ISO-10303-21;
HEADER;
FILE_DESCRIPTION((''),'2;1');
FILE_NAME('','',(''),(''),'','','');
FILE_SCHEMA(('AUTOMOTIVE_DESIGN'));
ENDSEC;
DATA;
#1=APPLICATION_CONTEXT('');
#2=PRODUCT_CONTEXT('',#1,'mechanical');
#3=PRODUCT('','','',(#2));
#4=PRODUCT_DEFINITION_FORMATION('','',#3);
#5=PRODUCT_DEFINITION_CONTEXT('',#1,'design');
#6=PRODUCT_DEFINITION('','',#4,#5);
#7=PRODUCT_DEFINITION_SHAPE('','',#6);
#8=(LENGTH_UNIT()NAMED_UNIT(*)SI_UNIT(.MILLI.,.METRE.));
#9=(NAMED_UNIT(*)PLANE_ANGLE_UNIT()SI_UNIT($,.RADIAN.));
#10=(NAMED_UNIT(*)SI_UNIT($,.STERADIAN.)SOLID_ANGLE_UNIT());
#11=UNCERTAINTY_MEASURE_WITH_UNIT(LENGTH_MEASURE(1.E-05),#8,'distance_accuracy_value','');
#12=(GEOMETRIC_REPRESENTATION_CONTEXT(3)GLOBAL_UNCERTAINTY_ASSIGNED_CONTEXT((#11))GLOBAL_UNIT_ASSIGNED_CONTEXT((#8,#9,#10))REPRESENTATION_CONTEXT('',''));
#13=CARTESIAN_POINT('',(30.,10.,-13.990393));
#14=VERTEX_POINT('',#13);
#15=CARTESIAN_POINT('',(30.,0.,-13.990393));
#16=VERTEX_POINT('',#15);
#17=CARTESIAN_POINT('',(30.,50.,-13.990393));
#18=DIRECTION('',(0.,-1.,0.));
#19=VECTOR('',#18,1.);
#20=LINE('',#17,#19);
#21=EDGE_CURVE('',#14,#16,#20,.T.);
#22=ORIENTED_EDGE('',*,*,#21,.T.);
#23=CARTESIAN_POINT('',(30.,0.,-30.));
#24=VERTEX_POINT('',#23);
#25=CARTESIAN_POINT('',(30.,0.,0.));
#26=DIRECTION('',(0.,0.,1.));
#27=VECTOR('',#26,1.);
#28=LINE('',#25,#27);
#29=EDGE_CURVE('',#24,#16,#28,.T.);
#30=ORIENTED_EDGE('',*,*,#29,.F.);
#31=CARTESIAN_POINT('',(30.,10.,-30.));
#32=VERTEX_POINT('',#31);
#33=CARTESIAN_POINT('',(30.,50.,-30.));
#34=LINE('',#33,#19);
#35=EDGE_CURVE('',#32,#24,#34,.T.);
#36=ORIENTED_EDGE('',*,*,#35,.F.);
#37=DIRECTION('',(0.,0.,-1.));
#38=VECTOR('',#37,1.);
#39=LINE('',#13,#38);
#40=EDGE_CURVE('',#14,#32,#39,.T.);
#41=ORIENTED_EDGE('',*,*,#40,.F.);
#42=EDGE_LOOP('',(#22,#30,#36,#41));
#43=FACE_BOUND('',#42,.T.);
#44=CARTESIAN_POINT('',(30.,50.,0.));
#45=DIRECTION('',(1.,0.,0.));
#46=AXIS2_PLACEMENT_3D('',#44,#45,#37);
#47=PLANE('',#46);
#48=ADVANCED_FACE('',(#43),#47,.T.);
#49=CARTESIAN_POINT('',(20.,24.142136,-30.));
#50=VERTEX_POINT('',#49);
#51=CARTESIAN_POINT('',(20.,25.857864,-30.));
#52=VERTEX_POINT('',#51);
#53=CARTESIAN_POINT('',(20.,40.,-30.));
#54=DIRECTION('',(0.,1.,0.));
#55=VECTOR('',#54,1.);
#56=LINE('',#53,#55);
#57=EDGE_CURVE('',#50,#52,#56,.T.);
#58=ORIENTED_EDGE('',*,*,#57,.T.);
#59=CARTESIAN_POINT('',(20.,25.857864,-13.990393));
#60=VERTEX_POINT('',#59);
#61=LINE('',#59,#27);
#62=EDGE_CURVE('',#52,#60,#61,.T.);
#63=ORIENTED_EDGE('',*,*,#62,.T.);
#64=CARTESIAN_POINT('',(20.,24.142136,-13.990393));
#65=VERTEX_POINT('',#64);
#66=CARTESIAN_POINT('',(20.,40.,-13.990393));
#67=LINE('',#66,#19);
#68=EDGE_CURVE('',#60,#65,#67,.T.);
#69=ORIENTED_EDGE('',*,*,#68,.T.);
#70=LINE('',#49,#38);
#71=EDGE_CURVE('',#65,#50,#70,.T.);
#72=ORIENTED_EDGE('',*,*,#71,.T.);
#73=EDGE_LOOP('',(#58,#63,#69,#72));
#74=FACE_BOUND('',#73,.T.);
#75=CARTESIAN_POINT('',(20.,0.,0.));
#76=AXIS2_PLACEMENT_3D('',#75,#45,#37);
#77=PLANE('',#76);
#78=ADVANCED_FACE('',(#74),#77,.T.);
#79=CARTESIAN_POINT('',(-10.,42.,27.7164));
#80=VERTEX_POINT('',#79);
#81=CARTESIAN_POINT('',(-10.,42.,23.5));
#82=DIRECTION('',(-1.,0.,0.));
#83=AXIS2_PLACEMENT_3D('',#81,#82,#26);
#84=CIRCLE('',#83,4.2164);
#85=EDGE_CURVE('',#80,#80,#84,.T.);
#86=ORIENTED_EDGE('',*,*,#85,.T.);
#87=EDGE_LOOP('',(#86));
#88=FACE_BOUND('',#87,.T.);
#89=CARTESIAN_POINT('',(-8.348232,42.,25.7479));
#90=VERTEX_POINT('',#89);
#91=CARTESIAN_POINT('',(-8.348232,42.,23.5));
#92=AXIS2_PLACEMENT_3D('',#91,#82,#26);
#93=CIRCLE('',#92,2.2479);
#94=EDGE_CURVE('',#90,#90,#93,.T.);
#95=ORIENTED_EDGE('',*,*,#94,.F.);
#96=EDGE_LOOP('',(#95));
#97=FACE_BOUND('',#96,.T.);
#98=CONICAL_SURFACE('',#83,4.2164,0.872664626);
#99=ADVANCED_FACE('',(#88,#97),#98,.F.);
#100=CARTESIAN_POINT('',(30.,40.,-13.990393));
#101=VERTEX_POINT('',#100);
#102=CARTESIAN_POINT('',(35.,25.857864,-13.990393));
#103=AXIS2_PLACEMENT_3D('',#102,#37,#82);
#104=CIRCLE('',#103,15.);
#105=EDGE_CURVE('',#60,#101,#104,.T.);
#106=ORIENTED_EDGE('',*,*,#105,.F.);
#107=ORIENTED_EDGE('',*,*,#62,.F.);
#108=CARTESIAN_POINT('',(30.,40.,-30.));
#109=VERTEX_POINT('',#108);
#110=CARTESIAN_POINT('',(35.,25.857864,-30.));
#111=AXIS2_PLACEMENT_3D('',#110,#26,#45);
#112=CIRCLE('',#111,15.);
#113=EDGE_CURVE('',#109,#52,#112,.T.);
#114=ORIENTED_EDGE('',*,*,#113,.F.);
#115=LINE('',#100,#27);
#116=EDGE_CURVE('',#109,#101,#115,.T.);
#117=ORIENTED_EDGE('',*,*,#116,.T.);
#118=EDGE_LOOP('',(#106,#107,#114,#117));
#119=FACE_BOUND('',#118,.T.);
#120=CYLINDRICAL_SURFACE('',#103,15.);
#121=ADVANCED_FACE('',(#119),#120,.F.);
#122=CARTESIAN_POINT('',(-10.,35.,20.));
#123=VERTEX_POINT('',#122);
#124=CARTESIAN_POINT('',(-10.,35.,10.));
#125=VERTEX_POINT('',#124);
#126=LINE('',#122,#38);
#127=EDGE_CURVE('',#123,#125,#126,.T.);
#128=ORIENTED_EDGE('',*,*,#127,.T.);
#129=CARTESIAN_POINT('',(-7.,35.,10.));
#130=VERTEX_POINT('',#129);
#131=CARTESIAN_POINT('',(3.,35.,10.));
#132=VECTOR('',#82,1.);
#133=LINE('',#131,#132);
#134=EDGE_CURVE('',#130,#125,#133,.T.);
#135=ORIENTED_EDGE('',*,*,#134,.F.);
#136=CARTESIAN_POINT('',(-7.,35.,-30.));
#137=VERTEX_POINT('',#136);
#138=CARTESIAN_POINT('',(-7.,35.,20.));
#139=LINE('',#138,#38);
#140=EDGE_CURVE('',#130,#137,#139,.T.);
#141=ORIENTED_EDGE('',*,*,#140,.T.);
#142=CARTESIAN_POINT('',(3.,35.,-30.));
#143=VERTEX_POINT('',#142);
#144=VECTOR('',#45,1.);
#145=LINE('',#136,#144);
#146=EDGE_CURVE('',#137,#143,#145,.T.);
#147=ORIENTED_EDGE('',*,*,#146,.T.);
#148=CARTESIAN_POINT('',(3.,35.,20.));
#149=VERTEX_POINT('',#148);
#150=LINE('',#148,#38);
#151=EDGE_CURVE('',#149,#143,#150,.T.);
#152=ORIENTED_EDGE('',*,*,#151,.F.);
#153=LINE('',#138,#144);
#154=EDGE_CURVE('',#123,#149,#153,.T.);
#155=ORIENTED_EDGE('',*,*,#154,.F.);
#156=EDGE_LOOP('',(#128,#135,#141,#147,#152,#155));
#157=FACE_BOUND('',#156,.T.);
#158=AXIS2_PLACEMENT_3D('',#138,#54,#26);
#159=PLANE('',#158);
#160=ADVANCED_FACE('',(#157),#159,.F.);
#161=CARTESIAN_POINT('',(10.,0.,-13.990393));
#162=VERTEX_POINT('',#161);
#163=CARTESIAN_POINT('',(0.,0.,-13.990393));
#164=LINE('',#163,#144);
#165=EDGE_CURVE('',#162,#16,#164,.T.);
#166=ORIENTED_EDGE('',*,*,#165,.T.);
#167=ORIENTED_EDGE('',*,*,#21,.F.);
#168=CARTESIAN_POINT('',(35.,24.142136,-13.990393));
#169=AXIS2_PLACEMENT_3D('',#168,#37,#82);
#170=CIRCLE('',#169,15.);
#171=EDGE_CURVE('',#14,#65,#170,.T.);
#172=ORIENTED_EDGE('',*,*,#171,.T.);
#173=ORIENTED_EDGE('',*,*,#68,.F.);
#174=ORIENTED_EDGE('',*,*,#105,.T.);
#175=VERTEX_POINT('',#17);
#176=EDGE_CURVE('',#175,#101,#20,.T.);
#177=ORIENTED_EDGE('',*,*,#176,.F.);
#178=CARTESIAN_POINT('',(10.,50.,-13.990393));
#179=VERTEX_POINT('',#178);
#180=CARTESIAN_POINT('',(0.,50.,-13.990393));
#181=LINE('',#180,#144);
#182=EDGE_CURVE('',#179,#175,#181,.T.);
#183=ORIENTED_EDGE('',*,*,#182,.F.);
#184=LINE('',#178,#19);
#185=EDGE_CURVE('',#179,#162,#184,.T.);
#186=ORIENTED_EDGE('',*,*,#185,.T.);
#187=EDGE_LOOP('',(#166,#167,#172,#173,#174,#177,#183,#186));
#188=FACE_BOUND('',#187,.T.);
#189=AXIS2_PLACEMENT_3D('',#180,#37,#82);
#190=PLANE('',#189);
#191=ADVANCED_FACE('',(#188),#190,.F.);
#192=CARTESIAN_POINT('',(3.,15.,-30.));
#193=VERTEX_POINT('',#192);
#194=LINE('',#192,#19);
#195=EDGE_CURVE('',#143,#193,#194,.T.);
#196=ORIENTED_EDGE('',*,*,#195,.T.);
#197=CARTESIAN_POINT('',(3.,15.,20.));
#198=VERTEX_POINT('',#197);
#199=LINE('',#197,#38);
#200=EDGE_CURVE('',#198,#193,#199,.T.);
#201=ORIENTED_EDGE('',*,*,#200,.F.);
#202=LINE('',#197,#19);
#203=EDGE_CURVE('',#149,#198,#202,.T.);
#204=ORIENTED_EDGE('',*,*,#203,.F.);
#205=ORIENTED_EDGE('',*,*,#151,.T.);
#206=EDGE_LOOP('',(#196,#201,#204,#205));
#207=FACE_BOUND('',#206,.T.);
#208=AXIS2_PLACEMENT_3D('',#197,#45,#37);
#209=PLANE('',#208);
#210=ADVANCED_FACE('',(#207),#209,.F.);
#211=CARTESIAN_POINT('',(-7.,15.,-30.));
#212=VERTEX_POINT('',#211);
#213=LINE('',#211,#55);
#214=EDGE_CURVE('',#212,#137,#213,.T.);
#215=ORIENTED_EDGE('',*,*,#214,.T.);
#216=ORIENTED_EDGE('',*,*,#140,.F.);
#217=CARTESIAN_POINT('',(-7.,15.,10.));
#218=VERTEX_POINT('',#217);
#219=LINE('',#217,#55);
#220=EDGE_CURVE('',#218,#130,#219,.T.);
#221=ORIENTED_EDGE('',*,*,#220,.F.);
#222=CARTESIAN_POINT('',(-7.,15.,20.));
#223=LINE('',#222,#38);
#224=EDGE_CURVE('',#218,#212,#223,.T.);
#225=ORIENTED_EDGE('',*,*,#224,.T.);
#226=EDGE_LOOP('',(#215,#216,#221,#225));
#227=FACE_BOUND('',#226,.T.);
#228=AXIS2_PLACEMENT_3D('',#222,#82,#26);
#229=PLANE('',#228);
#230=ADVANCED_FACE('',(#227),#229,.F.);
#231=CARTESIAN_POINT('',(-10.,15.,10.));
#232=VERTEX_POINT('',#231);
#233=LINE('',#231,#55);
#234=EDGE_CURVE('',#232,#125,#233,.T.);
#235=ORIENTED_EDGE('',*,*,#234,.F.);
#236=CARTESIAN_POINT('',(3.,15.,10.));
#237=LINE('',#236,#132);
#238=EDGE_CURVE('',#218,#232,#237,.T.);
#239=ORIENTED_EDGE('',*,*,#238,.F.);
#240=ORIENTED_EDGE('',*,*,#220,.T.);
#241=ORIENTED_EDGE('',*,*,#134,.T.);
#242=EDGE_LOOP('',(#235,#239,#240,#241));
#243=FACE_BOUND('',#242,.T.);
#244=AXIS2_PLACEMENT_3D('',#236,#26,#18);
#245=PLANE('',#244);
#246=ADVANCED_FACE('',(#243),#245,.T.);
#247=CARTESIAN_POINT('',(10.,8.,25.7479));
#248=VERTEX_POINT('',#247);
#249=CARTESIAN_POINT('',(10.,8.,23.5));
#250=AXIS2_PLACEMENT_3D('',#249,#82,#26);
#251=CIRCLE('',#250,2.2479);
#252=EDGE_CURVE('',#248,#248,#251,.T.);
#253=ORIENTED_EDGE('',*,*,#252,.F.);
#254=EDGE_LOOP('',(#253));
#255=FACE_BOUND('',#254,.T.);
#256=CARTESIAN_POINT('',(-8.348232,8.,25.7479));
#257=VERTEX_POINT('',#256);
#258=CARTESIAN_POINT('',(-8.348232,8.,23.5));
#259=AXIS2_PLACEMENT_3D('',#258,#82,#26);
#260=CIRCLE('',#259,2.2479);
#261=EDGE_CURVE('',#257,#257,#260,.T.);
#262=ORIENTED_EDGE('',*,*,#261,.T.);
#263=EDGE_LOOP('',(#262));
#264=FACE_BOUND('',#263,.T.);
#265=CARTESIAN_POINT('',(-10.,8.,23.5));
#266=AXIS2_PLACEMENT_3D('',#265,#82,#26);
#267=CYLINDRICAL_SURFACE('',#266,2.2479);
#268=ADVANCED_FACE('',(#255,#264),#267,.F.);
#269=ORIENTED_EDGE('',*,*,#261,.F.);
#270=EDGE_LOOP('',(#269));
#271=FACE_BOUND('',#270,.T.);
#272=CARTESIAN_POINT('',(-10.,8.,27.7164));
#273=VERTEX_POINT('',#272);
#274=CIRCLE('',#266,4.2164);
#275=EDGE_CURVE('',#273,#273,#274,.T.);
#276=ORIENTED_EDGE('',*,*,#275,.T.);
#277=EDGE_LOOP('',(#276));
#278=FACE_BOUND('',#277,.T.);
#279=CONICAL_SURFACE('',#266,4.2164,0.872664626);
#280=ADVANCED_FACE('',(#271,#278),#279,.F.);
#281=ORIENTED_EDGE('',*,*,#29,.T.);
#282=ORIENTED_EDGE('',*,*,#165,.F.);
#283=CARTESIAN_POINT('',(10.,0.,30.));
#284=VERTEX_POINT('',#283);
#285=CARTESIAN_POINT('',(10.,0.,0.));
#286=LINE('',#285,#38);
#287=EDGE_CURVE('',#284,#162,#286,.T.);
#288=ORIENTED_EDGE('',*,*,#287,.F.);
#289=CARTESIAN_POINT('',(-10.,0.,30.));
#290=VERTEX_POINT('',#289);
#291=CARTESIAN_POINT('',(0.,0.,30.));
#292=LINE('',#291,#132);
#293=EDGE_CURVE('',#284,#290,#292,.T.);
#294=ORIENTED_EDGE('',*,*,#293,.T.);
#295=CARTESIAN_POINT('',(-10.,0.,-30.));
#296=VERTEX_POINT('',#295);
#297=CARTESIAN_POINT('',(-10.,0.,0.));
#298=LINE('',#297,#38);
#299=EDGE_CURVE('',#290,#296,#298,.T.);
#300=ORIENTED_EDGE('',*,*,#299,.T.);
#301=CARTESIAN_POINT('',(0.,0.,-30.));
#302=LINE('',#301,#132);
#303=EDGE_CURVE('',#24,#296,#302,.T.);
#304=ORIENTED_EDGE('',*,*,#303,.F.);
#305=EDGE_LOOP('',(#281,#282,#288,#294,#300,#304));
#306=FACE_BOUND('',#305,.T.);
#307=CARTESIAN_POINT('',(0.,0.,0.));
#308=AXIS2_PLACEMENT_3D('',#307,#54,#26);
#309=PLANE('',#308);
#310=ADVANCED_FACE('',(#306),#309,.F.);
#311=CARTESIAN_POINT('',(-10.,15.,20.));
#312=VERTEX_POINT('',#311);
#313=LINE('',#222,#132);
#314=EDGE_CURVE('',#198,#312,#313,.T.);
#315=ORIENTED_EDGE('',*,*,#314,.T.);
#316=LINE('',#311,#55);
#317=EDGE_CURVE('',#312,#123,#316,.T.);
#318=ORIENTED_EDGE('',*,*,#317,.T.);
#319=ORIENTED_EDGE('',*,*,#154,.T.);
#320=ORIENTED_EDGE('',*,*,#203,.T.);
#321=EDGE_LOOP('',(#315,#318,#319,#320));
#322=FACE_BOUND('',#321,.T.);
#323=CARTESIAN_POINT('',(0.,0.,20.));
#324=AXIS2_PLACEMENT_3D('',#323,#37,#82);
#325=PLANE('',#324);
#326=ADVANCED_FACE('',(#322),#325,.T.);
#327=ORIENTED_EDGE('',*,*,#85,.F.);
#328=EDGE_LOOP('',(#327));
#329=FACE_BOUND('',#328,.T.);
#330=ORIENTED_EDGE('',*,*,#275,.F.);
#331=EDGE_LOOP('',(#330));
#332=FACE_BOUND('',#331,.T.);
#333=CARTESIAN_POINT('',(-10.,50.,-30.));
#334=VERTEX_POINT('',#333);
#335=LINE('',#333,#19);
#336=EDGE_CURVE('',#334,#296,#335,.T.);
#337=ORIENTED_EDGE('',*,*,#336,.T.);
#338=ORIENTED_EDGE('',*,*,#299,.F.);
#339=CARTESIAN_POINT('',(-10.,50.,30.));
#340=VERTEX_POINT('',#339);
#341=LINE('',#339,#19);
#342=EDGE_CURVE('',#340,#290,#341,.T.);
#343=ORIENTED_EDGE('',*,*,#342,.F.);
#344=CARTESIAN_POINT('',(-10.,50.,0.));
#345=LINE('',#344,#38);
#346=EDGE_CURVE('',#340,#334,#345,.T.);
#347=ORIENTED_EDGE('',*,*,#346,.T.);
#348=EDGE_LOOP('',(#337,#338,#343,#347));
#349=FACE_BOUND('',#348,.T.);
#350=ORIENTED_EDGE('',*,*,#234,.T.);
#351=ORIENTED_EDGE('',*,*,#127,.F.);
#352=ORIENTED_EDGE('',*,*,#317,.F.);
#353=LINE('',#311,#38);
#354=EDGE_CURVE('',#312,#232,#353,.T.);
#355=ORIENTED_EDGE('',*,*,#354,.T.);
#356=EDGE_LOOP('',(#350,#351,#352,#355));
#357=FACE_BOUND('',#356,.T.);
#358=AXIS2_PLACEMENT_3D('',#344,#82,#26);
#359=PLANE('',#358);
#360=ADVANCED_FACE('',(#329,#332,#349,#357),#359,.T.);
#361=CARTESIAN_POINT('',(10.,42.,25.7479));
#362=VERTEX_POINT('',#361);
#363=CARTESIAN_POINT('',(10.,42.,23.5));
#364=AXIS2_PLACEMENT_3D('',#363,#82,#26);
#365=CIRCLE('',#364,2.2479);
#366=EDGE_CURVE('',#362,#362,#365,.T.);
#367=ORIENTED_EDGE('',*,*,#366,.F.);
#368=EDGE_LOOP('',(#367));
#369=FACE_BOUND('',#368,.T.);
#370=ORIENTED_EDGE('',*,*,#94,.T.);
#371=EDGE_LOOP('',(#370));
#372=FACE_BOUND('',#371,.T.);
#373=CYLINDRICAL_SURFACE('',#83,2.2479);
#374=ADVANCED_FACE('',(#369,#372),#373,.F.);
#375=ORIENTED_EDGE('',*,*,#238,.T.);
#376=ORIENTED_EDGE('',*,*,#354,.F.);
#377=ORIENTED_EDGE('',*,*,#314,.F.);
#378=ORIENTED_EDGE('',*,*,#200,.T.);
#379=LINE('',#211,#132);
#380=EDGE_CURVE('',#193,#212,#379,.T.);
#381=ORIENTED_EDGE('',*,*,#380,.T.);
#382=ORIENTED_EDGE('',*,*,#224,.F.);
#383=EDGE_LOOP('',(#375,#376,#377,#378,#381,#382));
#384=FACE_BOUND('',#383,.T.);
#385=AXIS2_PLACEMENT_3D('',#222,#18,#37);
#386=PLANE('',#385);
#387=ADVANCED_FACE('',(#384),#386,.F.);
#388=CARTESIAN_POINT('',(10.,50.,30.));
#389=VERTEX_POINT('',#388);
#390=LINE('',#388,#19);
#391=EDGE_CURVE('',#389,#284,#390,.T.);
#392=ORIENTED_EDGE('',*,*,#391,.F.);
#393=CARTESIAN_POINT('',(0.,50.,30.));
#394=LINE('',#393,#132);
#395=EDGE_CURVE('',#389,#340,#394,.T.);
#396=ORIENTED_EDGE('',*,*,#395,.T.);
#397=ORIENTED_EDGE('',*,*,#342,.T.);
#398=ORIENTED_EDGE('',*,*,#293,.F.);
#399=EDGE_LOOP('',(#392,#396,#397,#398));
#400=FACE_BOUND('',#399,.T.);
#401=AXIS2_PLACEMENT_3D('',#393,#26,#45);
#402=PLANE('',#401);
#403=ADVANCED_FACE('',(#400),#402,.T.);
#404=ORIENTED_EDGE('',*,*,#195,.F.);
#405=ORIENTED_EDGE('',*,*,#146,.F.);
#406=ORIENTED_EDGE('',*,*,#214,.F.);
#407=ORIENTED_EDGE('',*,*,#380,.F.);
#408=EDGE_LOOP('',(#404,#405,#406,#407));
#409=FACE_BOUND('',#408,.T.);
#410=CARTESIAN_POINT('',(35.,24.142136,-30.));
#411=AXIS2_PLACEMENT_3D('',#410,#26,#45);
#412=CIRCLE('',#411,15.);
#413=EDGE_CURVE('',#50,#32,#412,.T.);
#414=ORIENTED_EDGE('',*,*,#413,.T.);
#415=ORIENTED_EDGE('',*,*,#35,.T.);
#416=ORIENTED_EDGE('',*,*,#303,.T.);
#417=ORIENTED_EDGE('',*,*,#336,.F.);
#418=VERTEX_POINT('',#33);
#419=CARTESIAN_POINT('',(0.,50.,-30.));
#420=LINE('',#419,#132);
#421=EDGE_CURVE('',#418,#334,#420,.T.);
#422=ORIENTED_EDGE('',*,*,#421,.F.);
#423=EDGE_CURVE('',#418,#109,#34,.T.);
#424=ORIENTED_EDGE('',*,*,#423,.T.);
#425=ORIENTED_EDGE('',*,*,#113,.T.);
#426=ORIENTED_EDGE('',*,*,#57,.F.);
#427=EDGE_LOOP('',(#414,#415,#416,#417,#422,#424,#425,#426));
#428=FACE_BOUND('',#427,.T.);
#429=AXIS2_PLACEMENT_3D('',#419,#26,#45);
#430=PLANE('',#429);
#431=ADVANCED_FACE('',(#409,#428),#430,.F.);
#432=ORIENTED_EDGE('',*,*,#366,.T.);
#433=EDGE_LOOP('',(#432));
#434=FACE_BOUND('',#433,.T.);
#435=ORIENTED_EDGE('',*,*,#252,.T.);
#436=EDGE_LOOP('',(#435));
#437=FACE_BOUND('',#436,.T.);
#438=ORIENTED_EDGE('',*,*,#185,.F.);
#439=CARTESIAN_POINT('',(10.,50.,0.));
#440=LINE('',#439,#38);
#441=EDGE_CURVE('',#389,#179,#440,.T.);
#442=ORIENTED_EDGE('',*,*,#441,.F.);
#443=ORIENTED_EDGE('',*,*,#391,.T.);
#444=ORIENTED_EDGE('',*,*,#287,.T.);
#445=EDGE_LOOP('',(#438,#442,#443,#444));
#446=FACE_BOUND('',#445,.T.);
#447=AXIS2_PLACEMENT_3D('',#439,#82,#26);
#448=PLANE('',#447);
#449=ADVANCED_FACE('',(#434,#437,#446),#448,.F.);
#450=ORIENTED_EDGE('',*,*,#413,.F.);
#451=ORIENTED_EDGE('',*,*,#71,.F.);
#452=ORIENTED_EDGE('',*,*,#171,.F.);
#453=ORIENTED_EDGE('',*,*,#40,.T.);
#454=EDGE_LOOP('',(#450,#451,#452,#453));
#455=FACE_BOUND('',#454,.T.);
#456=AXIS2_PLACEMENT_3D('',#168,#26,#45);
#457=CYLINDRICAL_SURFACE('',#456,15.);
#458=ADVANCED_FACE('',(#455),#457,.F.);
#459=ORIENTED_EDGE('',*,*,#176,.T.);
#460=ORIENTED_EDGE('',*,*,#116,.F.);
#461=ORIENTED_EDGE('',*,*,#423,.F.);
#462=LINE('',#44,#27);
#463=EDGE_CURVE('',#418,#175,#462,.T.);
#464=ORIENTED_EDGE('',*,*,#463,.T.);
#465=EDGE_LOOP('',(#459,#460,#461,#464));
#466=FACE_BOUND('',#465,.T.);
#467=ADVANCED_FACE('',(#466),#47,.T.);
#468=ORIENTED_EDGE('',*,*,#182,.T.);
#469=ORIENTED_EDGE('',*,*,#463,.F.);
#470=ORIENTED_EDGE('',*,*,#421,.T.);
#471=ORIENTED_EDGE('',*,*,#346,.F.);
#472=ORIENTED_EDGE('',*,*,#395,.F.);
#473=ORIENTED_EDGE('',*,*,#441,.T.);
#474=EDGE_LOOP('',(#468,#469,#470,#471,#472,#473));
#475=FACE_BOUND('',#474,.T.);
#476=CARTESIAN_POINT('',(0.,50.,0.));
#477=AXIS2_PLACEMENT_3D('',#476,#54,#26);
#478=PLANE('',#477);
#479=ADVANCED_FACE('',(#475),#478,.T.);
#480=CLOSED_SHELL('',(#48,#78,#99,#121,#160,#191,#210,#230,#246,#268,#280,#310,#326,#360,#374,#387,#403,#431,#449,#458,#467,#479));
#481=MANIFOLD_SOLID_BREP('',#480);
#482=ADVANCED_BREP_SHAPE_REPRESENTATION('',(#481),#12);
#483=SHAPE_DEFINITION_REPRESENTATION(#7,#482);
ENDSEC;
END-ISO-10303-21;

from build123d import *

# Parameters (mm, degrees)
SKETCH3_W                                         = 20
SKETCH3_H                                         = 60
SKETCH3_H_2                                       = 16.009607205
BOSS_EXTRUDE1_DEPTH                               = 50
SKETCH4_W                                         = 16.009607205
SKETCH4_H                                         = 30
CUT_EXTRUDE1_DEPTH                                = 10
FILLET4_R                                         = 15
CSK_FOR_8_FLAT_HEAD_MACHINE_SCREW_100_D           = 4.4958
CSK_FOR_8_FLAT_HEAD_MACHINE_SCREW_100_CSINK_D     = 8.4328
CSK_FOR_8_FLAT_HEAD_MACHINE_SCREW_100_CSINK_ANGLE = 100
SKETCH7_W                                         = 10
SKETCH7_H                                         = 20
CUT_EXTRUDE2_DEPTH                                = 50
SKETCH8_W                                         = 10
SKETCH8_H                                         = 20
CUT_EXTRUDE3_DEPTH                                = 13


with BuildPart() as part:
    # Sketch3 → Boss-Extrude1 (new body)
    with BuildSketch(Plane(origin=(0, 0, 0), x_dir=(1, 0, 0), z_dir=(0, 1, 0))):
        Rectangle(SKETCH3_W, SKETCH3_H)
        with Locations((20, 21.995196398)):
            Rectangle(SKETCH3_W, SKETCH3_H_2)
    extrude(amount=BOSS_EXTRUDE1_DEPTH)

    # Sketch4 → Cut-Extrude1 (cut)
    with BuildSketch(Plane(origin=(30, 0, 0), x_dir=(0, 0, -1), z_dir=(1, 0, 0))):
        with Locations((21.995196398, 25)):
            Rectangle(SKETCH4_W, SKETCH4_H)
    extrude(amount=-CUT_EXTRUDE1_DEPTH, mode=Mode.SUBTRACT)

    # Fillet4
    # the kernel refuses this fillet: 15 mm, written as the material it adds along each edge
    with BuildSketch(Plane(origin=(20, 10, -30), x_dir=(1, 0, 0), z_dir=(0, 0, 1))) as fillet4_piece_1:
        with BuildLine():
            CenterArc((15, 14.142135624), FILLET4_R, 180, 70.528779366)
            Line((0, 14.142135624), (-0.3, 14.142135624))
            Line((-0.3, 14.142135624), (-0.3, 0))
            Line((-0.3, 0), (0, -0.3))
            ThreePointArc((0, -0.3), (5, -0.3), (9.9, -0.282842712))
            Line((9.9, -0.282842712), (10, 0))
        make_face()
    extrude(amount=16.009607205)
    with BuildSketch(Plane(origin=(20, 40, -13.990392795), x_dir=(0, -1, 0), z_dir=(0, 0, -1))) as fillet4_piece_2:
        with BuildLine():
            CenterArc((14.142135624, -15), FILLET4_R, 90, 70.528779366)
            Line((0, -10), (-0.282842712, -9.9))
            ThreePointArc((-0.282842712, -9.9), (-0.3, -5), (-0.3, 0))
            Line((-0.3, 0), (0, 0.3))
            Line((0, 0.3), (14.142135624, 0.3))
            Line((14.142135624, 0.3), (14.142135624, 0))
        make_face()
    extrude(amount=16.009607205)

    # CSK for #8 Flat Head Machine Screw (100)1 (through all)
    with Locations(Plane.ZY.offset(10)):
        with Locations((23.5, 8), (23.5, 42)):
            CounterSinkHole(CSK_FOR_8_FLAT_HEAD_MACHINE_SCREW_100_D / 2, CSK_FOR_8_FLAT_HEAD_MACHINE_SCREW_100_CSINK_D / 2, counter_sink_angle=CSK_FOR_8_FLAT_HEAD_MACHINE_SCREW_100_CSINK_ANGLE)

    # Sketch7 → Cut-Extrude2 (cut)
    with BuildSketch(Plane(origin=(0, 0, -30), x_dir=(-1, 0, 0), z_dir=(0, 0, -1))):
        with Locations((2, 25)):
            Rectangle(SKETCH7_W, SKETCH7_H)
    extrude(amount=-CUT_EXTRUDE2_DEPTH, mode=Mode.SUBTRACT)

    # Sketch8 → Cut-Extrude3 (cut)
    with BuildSketch(Plane.ZY.offset(10)):
        with Locations((15, 25)):
            Rectangle(SKETCH8_W, SKETCH8_H)
    extrude(amount=-CUT_EXTRUDE3_DEPTH, mode=Mode.SUBTRACT)


solid = part.part
